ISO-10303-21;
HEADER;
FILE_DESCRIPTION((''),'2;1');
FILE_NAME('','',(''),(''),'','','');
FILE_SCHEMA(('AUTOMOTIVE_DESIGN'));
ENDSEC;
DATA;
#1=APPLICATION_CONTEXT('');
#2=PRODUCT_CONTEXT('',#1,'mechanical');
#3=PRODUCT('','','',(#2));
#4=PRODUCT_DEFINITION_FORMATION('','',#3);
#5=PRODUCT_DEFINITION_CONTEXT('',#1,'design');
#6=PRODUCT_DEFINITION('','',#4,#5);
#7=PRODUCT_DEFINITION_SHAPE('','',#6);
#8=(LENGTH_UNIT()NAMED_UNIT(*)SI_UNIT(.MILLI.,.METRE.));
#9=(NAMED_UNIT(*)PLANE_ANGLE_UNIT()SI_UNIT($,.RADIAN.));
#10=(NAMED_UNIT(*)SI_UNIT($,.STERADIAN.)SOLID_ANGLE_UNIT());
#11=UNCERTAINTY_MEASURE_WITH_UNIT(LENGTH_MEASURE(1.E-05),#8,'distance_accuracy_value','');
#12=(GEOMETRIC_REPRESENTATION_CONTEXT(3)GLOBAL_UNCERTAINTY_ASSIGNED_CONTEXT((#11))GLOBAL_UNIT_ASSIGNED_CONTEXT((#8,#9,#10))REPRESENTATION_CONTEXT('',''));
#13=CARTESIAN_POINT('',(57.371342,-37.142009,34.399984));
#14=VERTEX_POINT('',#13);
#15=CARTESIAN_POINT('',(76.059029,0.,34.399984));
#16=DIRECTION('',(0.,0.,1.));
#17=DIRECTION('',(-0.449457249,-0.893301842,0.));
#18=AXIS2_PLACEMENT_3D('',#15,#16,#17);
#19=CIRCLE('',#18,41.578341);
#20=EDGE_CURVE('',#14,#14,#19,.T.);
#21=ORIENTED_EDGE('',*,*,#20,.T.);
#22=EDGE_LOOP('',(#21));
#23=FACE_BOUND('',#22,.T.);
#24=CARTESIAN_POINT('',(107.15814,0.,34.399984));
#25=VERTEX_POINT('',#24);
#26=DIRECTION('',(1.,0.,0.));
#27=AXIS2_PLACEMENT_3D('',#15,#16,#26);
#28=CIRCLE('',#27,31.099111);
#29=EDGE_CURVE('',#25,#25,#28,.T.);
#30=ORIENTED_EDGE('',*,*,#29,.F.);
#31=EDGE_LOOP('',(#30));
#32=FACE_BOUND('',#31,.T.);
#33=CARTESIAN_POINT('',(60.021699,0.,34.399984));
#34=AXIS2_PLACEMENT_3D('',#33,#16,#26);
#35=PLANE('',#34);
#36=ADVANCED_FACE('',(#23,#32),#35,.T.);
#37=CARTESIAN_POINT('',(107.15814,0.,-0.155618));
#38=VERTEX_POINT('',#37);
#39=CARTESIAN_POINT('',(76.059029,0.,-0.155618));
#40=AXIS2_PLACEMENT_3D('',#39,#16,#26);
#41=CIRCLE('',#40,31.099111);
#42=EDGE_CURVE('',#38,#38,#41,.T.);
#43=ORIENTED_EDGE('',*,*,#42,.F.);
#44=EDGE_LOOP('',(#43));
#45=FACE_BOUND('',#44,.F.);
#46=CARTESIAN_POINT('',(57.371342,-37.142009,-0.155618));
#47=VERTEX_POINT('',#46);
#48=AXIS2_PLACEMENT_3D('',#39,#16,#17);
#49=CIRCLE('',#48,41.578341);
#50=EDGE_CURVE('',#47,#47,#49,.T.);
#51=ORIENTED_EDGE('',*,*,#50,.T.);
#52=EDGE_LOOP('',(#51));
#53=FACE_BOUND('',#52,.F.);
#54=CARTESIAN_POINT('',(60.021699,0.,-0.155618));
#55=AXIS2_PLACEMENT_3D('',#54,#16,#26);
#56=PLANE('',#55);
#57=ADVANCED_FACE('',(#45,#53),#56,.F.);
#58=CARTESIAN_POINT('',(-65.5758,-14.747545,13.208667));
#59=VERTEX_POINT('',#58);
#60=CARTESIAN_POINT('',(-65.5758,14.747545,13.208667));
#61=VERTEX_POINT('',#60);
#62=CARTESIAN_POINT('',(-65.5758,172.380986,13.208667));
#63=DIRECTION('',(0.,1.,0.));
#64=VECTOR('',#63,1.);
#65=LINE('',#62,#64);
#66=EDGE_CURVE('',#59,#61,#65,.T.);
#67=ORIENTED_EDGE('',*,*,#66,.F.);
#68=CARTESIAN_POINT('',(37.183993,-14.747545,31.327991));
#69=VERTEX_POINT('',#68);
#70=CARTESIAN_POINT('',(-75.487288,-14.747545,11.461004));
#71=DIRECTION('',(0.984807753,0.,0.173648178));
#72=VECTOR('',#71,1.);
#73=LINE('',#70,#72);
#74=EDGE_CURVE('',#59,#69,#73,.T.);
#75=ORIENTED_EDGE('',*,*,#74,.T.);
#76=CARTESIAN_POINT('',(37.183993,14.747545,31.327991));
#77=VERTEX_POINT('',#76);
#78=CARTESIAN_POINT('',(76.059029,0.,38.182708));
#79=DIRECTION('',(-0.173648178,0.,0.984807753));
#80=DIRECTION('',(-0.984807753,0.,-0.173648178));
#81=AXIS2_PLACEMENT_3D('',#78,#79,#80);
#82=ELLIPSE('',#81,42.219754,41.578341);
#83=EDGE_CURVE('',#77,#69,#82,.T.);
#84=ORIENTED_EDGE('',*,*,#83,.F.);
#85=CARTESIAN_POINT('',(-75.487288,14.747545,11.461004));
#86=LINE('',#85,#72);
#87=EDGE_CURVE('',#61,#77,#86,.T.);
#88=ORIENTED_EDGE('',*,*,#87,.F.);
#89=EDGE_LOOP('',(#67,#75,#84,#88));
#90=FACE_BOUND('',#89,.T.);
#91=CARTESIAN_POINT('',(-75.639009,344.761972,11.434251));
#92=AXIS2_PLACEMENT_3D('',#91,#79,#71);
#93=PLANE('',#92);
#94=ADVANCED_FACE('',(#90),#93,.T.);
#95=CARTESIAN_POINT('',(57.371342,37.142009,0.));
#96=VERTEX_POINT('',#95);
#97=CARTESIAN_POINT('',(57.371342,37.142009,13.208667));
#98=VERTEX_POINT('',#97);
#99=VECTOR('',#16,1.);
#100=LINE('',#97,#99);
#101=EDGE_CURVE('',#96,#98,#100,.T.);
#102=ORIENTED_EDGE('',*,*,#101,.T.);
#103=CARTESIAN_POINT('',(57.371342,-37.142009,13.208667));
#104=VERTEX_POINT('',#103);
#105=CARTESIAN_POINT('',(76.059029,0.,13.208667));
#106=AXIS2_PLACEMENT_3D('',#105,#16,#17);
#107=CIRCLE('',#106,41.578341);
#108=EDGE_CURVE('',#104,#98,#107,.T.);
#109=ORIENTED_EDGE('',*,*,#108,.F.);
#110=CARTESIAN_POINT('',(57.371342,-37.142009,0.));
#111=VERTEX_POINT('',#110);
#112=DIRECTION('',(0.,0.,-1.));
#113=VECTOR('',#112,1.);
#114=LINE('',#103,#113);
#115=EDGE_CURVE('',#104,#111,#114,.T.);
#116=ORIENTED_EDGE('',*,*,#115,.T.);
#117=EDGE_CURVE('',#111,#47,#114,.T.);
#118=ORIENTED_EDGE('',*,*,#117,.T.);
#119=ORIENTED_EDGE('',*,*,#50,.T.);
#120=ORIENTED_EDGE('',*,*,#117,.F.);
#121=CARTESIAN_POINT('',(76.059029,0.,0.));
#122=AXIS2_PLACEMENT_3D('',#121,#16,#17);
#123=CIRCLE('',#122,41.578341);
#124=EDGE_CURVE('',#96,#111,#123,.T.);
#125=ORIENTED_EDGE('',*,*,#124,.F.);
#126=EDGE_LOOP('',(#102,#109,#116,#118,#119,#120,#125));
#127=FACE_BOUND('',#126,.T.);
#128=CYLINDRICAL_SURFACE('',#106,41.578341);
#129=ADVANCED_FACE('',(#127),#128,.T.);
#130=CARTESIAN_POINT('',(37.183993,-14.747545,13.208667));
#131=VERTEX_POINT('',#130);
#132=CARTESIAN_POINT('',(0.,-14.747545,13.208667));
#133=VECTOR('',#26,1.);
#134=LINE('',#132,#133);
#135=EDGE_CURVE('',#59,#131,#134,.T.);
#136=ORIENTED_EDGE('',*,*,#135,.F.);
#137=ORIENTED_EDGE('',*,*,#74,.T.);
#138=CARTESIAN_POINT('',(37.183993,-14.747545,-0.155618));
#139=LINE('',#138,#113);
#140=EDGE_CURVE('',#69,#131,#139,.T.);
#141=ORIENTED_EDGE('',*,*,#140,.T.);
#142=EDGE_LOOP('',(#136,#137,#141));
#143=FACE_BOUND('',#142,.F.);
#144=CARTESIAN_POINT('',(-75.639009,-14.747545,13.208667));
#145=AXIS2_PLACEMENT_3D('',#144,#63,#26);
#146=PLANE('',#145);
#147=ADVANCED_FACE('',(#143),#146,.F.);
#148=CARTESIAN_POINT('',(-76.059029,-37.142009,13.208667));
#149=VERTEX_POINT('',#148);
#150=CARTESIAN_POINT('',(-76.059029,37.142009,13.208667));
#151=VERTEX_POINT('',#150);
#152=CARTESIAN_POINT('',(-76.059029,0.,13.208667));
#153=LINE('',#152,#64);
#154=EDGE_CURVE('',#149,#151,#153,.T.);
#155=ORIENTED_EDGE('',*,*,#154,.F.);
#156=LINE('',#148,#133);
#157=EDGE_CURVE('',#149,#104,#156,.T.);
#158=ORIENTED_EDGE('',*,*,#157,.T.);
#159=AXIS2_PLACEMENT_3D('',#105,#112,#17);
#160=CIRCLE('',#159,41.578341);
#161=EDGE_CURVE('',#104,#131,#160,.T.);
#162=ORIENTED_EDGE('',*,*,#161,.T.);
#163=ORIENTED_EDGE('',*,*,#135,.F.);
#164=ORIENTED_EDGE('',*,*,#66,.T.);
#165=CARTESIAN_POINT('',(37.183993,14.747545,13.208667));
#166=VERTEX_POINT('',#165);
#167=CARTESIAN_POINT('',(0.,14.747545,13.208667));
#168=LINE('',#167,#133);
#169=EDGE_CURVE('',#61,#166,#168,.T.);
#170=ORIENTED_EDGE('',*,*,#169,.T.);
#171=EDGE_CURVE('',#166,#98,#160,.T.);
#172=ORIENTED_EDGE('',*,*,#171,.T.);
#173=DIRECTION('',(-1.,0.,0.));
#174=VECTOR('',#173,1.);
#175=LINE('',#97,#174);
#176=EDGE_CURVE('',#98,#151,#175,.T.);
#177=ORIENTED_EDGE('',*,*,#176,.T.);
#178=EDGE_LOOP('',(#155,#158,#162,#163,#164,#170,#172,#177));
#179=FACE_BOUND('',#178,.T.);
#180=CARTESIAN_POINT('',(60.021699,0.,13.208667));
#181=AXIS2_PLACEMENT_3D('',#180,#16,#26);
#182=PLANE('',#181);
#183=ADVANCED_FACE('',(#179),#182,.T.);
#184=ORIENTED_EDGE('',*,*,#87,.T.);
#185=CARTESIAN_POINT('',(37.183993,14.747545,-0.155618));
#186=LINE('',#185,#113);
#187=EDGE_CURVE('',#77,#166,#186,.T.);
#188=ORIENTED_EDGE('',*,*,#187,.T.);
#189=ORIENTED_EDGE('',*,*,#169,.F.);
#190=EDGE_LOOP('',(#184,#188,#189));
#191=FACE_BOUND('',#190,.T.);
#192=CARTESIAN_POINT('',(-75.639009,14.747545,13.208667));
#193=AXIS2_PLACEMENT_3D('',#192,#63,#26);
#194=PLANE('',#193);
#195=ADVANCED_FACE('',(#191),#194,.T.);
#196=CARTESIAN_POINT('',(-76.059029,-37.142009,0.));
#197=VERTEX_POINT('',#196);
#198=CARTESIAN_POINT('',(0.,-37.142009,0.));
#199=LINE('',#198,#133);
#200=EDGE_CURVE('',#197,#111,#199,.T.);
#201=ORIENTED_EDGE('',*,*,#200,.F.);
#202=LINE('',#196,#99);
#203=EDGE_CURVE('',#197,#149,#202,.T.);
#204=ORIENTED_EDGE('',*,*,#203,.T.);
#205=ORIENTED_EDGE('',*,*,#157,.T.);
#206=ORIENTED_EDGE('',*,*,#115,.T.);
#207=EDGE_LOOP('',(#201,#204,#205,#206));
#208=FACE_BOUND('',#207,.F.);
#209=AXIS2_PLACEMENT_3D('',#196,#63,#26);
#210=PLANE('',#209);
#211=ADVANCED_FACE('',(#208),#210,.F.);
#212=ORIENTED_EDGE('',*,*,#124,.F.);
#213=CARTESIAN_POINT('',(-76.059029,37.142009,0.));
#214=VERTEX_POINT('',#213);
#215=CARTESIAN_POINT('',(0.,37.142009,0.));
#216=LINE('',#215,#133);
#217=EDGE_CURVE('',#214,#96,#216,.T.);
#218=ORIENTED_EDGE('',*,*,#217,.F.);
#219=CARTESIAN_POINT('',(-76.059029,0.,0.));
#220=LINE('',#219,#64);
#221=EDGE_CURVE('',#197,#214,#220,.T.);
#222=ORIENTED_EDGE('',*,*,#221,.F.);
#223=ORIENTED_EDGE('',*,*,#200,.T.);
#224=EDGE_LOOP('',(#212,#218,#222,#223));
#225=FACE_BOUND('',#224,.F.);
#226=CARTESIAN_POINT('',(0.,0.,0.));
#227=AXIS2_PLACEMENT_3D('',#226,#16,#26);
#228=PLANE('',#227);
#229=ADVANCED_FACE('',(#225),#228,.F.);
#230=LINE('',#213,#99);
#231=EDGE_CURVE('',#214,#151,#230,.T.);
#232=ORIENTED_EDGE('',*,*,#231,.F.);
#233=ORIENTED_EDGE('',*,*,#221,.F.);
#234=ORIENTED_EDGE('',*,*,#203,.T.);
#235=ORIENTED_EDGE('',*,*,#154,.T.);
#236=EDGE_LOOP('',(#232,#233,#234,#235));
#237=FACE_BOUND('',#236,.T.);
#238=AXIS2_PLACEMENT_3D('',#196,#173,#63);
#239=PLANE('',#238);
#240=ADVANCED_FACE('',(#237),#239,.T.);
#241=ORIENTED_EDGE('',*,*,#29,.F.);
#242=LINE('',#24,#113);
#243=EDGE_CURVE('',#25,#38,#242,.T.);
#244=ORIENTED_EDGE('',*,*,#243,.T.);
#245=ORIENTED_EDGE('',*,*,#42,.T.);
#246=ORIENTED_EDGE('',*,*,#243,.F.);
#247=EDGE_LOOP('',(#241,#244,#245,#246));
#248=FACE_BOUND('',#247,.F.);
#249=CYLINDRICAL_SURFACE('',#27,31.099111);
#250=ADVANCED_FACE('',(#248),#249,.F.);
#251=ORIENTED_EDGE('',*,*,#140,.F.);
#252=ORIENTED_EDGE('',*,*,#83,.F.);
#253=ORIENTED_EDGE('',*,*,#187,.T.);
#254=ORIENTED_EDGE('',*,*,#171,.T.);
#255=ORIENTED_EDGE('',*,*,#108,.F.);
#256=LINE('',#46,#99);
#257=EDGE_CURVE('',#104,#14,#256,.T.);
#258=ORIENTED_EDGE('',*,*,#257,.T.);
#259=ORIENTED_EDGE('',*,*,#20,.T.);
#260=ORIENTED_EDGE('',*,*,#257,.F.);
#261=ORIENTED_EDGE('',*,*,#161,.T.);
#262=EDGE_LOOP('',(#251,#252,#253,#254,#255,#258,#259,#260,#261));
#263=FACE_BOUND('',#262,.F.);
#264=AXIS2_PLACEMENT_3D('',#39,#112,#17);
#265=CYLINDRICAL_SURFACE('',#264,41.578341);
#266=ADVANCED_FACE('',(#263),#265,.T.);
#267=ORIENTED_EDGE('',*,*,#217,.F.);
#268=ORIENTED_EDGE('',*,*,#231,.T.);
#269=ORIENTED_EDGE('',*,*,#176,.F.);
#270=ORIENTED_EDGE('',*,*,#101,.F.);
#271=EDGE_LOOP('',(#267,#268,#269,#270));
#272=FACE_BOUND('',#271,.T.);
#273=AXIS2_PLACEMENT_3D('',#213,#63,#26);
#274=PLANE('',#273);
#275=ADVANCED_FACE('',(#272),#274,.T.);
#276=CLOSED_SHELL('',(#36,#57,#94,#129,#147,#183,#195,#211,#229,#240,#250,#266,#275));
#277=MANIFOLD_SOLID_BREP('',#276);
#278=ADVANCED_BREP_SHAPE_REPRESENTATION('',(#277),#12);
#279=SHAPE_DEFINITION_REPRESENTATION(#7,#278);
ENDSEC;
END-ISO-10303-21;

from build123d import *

# Parameters (mm, degrees)
F6_W        = 152.1180570126
F6_H        = 74.284017086
F0_DEPTH    = 13.2086668164
F1_DEPTH    = 13.3642852306
F2_W        = 151.2780189514
F2_H        = 29.4950902462
F8_DEPTH    = 20.6191111356
F3_T4_DEPTH = 689.5239445372
F4_DEPTH    = 34.5556028187
F5_R        = 31.0991112757
F9_DEPTH    = 34.5566028187


# Not quite as in the source:
# - a fillet or chamfer that OpenCascade refuses, or shapes differently, is made with other operations: its cross-section is extruded or revolved along the edge and cut away or added


with BuildPart() as f0:
    # F6 (on Top) → F0 (new body)
    with BuildSketch(Plane.XY):
        Rectangle(F6_W, F6_H)
    extrude(amount=F0_DEPTH)

    # F7 (on face) → F1 (join)
    with BuildSketch(Plane.XY.offset(13.2086668164)):
        with BuildLine():
            Line((76.0590285063, 37.142008543), (57.3713417563, 37.142008543))
            ThreePointArc((57.3713417563, 37.142008543), (34.4806875741, 0), (57.3713417563, -37.142008543))
            Line((57.3713417563, -37.142008543), (76.0590285063, -37.142008543))
            Line((76.0590285063, -37.142008543), (76.0590285063, 37.142008543))
        make_face()
        with BuildLine():
            ThreePointArc((57.3713417563, -37.142008543), (97.873650022, -35.396055187), (117.6373694385, 0))
            ThreePointArc((117.6373694385, 0), (97.873650022, 35.396055187), (57.3713417563, 37.142008543))
            Line((57.3713417563, 37.142008543), (76.0590285063, 37.142008543))
            Line((76.0590285063, 37.142008543), (76.0590285063, -37.142008543))
            Line((76.0590285063, -37.142008543), (57.3713417563, -37.142008543))
        make_face()
    extrude(amount=-F1_DEPTH)

    # F2 (on face) → F8 (join)
    with BuildSketch(Plane.XY.offset(13.2086668164)):
        Rectangle(F2_W, F2_H)
    extrude(amount=F8_DEPTH)

    # F3: chamfer of 127 x 22.39352655 on 1 edges, made by hand


with BuildPart() as f3_tool2:
    # F3_s3 → F3_t4 (new body)
    with BuildSketch(Plane.XZ.offset(-344.7619722686)):
        Polygon((-75.6390094757, 11.434251402), (51.3609905243, 33.827777952), (-75.6390094757, 33.827777952), align=None)
    extrude(amount=F3_T4_DEPTH)

    split(bisect_by=Plane.XY.offset(13.2086668164), keep=Keep.TOP)


with BuildPart() as f0_1:
    add(f0.part)

    # F3_t1: cut F3_tool2
    add(f3_tool2.part, mode=Mode.SUBTRACT)

    # F4 (add): a face of the model
    f4_faces = [f0_1.faces().sort_by_distance(p)[0] for p in [
        (76.0590285063, 0, -0.1556184143),
    ]]
    extrude(f4_faces, amount=-F4_DEPTH)

    # F5 (on face) → F9 (cut, through all)
    with BuildSketch(Plane.XY.offset(34.3999844044)):
        with Locations((76.0590285063, 0)):
            Circle(F5_R)
    extrude(amount=-F9_DEPTH, mode=Mode.SUBTRACT)


solid = f0_1.part
